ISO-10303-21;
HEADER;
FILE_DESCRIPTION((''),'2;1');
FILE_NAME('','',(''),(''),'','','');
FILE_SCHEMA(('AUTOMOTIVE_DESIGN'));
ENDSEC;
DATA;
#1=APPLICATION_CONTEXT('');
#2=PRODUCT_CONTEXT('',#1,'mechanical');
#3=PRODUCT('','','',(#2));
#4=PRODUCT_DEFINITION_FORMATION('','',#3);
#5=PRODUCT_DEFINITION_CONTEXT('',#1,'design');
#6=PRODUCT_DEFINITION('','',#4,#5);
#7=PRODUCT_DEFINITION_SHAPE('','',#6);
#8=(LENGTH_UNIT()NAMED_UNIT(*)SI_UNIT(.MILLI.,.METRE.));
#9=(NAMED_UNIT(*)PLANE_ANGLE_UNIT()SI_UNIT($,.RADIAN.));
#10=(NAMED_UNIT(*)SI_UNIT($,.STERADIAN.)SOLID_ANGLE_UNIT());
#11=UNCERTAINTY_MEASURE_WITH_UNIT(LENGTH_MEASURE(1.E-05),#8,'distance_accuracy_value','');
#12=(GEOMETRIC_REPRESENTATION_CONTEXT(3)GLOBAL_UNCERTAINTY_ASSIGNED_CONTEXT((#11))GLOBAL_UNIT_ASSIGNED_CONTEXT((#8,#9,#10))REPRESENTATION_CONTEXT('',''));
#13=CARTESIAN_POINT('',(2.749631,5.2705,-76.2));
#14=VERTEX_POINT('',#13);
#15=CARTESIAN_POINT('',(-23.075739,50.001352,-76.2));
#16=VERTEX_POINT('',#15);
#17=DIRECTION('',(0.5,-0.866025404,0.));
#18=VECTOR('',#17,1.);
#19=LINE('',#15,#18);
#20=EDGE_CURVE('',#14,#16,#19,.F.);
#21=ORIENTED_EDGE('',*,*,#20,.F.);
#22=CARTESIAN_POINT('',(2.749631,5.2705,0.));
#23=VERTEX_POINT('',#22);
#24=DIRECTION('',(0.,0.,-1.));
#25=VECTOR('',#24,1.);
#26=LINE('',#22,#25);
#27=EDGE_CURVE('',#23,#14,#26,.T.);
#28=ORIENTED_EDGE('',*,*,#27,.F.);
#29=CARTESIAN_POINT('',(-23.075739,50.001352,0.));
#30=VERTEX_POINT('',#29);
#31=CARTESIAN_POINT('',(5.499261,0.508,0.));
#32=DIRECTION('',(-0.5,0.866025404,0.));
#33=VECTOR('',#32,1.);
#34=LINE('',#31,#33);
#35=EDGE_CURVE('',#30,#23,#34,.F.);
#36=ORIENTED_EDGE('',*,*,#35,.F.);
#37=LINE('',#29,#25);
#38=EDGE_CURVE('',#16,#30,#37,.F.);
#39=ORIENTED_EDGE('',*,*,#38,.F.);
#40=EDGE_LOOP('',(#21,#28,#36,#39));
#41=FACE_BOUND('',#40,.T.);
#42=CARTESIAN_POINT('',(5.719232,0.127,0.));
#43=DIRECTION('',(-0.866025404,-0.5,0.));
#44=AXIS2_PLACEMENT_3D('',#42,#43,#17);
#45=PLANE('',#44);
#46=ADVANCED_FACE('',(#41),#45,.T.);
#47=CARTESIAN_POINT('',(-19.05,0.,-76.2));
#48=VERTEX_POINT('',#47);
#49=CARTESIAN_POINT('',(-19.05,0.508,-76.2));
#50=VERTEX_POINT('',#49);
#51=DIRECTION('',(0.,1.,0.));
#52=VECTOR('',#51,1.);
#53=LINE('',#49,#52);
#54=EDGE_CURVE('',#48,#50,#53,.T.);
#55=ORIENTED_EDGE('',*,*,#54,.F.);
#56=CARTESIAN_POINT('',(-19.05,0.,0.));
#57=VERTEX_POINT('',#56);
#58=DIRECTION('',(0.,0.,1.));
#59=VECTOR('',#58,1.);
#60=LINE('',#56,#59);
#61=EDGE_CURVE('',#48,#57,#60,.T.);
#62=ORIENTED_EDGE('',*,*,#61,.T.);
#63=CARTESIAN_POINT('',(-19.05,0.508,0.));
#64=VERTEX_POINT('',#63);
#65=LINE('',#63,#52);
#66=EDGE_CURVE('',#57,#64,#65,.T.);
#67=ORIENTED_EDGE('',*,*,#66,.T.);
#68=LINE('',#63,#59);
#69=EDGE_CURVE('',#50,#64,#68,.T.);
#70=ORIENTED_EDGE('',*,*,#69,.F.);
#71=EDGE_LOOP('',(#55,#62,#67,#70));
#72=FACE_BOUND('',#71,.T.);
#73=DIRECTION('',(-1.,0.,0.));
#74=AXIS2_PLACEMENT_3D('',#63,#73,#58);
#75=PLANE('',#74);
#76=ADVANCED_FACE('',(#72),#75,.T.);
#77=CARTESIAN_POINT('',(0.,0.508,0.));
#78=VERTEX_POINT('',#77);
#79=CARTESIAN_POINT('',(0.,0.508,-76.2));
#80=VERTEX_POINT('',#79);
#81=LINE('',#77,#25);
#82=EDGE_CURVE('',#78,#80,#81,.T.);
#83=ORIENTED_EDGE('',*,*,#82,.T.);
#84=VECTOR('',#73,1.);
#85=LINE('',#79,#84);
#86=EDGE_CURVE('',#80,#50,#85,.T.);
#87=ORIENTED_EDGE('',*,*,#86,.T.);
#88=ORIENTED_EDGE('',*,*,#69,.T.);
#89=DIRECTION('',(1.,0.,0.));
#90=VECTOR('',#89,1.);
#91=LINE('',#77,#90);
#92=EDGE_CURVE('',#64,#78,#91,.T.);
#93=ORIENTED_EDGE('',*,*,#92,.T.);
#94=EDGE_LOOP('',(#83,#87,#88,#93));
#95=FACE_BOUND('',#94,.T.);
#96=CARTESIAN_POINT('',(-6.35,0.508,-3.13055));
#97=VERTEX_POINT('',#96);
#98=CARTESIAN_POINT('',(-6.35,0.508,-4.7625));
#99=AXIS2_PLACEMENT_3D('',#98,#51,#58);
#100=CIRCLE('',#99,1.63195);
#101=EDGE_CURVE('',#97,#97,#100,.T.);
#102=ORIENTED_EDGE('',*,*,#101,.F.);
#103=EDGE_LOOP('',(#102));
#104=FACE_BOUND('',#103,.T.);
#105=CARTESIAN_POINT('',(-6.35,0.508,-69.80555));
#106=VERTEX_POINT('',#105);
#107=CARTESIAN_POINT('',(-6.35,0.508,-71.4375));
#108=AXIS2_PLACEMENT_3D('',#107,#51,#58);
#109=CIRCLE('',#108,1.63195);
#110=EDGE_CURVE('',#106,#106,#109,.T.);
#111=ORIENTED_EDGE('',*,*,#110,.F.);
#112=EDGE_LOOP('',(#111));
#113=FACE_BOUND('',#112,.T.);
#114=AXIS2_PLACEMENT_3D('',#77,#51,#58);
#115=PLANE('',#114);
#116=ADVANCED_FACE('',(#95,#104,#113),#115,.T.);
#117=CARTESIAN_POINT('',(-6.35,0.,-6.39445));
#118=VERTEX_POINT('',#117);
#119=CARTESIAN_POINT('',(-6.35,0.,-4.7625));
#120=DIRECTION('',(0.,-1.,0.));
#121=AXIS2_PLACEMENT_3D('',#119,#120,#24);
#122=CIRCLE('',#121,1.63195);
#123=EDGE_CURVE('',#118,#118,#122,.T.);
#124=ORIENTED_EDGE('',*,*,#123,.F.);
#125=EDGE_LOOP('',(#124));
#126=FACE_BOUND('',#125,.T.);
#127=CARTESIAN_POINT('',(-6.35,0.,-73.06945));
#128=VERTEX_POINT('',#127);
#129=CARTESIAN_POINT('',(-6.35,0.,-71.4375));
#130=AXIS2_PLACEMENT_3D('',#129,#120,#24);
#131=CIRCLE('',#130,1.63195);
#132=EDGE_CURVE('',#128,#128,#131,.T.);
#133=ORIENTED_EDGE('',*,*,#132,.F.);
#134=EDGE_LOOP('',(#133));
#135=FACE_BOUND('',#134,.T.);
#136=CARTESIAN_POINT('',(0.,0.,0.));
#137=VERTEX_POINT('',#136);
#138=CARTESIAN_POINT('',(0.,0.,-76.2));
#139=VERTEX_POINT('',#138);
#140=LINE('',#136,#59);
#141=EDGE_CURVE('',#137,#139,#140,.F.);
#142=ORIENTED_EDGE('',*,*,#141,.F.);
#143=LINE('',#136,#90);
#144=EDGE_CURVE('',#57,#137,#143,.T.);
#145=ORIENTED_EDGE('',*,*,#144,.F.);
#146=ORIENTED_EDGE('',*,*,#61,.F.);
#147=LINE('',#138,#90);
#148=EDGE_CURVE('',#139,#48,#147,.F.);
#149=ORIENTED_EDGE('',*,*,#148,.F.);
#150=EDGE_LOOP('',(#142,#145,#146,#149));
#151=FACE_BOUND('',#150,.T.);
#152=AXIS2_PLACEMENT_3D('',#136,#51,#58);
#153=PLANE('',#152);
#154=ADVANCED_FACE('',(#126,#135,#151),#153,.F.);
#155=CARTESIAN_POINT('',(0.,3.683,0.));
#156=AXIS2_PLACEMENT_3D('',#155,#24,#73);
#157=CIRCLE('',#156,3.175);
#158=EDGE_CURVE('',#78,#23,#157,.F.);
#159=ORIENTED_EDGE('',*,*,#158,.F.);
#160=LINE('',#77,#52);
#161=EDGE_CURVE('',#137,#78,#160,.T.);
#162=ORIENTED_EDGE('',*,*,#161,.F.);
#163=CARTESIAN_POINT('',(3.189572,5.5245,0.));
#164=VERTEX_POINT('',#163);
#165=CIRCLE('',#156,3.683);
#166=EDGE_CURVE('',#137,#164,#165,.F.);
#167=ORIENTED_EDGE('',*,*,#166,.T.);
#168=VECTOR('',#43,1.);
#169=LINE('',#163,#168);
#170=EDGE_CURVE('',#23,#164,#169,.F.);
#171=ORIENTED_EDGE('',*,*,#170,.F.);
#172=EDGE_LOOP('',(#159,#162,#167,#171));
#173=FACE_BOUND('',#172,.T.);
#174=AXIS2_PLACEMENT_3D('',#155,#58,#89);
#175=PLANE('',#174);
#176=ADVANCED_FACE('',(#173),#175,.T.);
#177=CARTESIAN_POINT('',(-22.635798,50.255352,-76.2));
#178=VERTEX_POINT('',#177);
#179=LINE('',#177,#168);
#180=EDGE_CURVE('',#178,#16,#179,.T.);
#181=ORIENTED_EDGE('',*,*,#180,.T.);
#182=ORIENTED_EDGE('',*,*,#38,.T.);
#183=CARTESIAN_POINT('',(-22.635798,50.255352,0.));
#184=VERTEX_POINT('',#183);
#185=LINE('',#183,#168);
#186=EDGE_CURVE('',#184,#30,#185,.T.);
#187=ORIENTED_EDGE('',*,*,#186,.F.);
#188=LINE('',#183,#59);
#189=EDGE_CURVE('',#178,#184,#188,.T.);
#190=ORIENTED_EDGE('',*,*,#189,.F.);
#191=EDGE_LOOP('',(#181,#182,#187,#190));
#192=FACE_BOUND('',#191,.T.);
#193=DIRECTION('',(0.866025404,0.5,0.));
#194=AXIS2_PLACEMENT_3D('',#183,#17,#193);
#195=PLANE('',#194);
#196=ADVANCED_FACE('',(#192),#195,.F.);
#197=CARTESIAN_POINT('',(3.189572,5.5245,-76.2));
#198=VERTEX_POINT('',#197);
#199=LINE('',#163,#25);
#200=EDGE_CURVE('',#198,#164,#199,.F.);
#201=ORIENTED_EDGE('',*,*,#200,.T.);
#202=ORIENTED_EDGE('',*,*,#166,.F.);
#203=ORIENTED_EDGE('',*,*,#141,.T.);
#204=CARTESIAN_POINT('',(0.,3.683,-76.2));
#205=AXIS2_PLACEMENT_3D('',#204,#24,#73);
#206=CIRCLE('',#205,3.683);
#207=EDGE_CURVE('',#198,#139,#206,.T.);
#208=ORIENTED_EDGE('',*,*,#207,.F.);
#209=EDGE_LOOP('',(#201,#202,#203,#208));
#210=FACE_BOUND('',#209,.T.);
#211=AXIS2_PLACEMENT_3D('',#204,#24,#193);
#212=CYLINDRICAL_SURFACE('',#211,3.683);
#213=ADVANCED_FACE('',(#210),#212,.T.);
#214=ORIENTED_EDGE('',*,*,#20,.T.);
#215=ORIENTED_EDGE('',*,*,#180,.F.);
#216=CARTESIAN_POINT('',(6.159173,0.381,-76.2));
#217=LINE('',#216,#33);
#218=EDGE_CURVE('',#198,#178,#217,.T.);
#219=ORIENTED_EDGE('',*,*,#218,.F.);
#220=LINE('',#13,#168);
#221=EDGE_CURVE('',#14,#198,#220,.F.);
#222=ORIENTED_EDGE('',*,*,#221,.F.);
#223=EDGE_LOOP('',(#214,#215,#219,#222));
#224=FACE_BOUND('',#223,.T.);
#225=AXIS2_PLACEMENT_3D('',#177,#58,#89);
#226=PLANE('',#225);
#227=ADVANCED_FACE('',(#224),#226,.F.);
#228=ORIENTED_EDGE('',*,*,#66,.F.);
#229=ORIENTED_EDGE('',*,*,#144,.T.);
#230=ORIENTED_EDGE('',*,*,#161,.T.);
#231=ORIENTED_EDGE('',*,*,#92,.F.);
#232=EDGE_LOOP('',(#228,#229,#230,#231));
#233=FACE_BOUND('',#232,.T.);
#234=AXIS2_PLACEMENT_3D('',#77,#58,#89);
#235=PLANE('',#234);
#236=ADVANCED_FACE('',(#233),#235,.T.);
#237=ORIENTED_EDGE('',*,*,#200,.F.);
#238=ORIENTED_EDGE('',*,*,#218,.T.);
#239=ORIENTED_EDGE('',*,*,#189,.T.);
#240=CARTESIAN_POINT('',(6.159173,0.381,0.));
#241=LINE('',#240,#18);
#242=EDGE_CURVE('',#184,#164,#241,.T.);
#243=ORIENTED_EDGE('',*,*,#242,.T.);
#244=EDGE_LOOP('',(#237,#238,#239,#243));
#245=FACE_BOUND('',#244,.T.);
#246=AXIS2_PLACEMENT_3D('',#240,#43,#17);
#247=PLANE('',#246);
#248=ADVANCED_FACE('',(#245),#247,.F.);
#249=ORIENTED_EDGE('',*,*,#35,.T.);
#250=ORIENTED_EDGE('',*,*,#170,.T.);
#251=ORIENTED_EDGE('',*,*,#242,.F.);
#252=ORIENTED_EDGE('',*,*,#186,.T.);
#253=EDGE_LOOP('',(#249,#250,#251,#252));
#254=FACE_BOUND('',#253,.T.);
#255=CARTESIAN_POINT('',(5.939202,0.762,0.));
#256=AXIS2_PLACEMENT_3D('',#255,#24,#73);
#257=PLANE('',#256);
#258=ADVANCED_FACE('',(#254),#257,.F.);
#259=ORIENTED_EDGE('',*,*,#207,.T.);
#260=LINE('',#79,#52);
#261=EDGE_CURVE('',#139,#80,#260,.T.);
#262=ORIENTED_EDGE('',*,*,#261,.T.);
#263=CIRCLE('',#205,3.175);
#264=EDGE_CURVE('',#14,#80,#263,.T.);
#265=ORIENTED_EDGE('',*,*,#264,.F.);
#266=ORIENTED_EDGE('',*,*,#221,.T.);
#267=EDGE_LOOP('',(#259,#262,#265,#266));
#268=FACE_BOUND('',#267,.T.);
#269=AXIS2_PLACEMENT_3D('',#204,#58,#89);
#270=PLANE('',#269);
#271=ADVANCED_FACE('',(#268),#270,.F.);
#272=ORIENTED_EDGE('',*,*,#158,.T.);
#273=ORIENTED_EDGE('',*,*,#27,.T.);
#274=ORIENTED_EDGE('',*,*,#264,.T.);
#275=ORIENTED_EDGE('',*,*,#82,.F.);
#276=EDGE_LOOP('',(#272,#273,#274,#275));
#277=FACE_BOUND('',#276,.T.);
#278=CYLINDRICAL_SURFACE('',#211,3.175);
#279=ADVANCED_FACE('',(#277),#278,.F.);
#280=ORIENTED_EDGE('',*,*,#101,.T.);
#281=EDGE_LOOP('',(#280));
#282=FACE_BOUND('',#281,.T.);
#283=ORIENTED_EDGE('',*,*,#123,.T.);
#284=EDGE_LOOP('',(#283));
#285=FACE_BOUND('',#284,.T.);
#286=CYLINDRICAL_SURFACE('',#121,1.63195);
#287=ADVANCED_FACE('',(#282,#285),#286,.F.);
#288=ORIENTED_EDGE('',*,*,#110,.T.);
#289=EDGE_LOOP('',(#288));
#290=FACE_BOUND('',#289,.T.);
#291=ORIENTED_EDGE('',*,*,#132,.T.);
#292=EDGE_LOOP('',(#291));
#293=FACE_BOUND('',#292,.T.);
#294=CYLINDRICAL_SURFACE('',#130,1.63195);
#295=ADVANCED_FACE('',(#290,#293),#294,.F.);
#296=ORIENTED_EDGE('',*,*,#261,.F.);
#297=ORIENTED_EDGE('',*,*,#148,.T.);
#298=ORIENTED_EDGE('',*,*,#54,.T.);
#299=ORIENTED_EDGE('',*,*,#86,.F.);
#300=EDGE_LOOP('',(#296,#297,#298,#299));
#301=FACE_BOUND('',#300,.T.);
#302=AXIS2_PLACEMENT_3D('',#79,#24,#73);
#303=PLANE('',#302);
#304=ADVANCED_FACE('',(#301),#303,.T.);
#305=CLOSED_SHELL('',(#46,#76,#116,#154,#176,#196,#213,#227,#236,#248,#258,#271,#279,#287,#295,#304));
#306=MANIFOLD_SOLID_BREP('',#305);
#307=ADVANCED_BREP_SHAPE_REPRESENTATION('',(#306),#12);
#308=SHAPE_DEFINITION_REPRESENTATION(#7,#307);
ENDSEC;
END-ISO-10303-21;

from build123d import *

# Parameters (mm, degrees)
SKETCH2_W                 = 19.05
SKETCH2_H                 = 76.2
BOSS_EXTRUDE2_DEPTH       = 0.508
EDGE_FLANGE2_DEPTH        = 76.2
F_4_CLEARANCE_HOLE1_D     = 3.2639
F_4_CLEARANCE_HOLE1_DEPTH = 0.508


# Sheet-metal steps are written as plain solids
with BuildPart() as part:
    # Sketch2 → Boss-Extrude2 (new body)
    with BuildSketch(Plane(origin=(0, 0, 0), x_dir=(1, 0, 0), z_dir=(0, 1, 0))):
        with Locations((-9.525, 38.1)):
            Rectangle(SKETCH2_W, SKETCH2_H)
    extrude(amount=BOSS_EXTRUDE2_DEPTH)

    # Edge-Flange2 section (across the edge) → Edge-Flange2 (add)
    with BuildSketch(Plane(origin=(5.499261314, 0.508, 0), x_dir=(-0.8660254037844398, -0.499999999999998, 0), z_dir=(0, 0, -1))):
        with BuildLine():
            Line((-0.508, 5.499261314), (-0.508, 57.15))
            Line((-0.508, 57.15), (0, 57.15))
            Line((0, 57.15), (0, 5.499261314))
            ThreePointArc((0, 5.499261314), (1.5875, 2.749630657), (4.7625, 2.749630657))
            Line((4.7625, 2.749630657), (5.0165, 2.309689752))
            ThreePointArc((5.0165, 2.309689752), (1.3335, 2.309689752), (-0.508, 5.499261314))
        make_face()
    extrude(amount=EDGE_FLANGE2_DEPTH)

    # #4 Clearance Hole1
    with Locations(Plane(origin=(0, 0, 0), x_dir=(-1, 0, 0), z_dir=(0, -1, 0))):
        with Locations((6.35, 71.4375), (6.35, 4.7625)):
            Hole(F_4_CLEARANCE_HOLE1_D / 2, depth=F_4_CLEARANCE_HOLE1_DEPTH)


solid = part.part
